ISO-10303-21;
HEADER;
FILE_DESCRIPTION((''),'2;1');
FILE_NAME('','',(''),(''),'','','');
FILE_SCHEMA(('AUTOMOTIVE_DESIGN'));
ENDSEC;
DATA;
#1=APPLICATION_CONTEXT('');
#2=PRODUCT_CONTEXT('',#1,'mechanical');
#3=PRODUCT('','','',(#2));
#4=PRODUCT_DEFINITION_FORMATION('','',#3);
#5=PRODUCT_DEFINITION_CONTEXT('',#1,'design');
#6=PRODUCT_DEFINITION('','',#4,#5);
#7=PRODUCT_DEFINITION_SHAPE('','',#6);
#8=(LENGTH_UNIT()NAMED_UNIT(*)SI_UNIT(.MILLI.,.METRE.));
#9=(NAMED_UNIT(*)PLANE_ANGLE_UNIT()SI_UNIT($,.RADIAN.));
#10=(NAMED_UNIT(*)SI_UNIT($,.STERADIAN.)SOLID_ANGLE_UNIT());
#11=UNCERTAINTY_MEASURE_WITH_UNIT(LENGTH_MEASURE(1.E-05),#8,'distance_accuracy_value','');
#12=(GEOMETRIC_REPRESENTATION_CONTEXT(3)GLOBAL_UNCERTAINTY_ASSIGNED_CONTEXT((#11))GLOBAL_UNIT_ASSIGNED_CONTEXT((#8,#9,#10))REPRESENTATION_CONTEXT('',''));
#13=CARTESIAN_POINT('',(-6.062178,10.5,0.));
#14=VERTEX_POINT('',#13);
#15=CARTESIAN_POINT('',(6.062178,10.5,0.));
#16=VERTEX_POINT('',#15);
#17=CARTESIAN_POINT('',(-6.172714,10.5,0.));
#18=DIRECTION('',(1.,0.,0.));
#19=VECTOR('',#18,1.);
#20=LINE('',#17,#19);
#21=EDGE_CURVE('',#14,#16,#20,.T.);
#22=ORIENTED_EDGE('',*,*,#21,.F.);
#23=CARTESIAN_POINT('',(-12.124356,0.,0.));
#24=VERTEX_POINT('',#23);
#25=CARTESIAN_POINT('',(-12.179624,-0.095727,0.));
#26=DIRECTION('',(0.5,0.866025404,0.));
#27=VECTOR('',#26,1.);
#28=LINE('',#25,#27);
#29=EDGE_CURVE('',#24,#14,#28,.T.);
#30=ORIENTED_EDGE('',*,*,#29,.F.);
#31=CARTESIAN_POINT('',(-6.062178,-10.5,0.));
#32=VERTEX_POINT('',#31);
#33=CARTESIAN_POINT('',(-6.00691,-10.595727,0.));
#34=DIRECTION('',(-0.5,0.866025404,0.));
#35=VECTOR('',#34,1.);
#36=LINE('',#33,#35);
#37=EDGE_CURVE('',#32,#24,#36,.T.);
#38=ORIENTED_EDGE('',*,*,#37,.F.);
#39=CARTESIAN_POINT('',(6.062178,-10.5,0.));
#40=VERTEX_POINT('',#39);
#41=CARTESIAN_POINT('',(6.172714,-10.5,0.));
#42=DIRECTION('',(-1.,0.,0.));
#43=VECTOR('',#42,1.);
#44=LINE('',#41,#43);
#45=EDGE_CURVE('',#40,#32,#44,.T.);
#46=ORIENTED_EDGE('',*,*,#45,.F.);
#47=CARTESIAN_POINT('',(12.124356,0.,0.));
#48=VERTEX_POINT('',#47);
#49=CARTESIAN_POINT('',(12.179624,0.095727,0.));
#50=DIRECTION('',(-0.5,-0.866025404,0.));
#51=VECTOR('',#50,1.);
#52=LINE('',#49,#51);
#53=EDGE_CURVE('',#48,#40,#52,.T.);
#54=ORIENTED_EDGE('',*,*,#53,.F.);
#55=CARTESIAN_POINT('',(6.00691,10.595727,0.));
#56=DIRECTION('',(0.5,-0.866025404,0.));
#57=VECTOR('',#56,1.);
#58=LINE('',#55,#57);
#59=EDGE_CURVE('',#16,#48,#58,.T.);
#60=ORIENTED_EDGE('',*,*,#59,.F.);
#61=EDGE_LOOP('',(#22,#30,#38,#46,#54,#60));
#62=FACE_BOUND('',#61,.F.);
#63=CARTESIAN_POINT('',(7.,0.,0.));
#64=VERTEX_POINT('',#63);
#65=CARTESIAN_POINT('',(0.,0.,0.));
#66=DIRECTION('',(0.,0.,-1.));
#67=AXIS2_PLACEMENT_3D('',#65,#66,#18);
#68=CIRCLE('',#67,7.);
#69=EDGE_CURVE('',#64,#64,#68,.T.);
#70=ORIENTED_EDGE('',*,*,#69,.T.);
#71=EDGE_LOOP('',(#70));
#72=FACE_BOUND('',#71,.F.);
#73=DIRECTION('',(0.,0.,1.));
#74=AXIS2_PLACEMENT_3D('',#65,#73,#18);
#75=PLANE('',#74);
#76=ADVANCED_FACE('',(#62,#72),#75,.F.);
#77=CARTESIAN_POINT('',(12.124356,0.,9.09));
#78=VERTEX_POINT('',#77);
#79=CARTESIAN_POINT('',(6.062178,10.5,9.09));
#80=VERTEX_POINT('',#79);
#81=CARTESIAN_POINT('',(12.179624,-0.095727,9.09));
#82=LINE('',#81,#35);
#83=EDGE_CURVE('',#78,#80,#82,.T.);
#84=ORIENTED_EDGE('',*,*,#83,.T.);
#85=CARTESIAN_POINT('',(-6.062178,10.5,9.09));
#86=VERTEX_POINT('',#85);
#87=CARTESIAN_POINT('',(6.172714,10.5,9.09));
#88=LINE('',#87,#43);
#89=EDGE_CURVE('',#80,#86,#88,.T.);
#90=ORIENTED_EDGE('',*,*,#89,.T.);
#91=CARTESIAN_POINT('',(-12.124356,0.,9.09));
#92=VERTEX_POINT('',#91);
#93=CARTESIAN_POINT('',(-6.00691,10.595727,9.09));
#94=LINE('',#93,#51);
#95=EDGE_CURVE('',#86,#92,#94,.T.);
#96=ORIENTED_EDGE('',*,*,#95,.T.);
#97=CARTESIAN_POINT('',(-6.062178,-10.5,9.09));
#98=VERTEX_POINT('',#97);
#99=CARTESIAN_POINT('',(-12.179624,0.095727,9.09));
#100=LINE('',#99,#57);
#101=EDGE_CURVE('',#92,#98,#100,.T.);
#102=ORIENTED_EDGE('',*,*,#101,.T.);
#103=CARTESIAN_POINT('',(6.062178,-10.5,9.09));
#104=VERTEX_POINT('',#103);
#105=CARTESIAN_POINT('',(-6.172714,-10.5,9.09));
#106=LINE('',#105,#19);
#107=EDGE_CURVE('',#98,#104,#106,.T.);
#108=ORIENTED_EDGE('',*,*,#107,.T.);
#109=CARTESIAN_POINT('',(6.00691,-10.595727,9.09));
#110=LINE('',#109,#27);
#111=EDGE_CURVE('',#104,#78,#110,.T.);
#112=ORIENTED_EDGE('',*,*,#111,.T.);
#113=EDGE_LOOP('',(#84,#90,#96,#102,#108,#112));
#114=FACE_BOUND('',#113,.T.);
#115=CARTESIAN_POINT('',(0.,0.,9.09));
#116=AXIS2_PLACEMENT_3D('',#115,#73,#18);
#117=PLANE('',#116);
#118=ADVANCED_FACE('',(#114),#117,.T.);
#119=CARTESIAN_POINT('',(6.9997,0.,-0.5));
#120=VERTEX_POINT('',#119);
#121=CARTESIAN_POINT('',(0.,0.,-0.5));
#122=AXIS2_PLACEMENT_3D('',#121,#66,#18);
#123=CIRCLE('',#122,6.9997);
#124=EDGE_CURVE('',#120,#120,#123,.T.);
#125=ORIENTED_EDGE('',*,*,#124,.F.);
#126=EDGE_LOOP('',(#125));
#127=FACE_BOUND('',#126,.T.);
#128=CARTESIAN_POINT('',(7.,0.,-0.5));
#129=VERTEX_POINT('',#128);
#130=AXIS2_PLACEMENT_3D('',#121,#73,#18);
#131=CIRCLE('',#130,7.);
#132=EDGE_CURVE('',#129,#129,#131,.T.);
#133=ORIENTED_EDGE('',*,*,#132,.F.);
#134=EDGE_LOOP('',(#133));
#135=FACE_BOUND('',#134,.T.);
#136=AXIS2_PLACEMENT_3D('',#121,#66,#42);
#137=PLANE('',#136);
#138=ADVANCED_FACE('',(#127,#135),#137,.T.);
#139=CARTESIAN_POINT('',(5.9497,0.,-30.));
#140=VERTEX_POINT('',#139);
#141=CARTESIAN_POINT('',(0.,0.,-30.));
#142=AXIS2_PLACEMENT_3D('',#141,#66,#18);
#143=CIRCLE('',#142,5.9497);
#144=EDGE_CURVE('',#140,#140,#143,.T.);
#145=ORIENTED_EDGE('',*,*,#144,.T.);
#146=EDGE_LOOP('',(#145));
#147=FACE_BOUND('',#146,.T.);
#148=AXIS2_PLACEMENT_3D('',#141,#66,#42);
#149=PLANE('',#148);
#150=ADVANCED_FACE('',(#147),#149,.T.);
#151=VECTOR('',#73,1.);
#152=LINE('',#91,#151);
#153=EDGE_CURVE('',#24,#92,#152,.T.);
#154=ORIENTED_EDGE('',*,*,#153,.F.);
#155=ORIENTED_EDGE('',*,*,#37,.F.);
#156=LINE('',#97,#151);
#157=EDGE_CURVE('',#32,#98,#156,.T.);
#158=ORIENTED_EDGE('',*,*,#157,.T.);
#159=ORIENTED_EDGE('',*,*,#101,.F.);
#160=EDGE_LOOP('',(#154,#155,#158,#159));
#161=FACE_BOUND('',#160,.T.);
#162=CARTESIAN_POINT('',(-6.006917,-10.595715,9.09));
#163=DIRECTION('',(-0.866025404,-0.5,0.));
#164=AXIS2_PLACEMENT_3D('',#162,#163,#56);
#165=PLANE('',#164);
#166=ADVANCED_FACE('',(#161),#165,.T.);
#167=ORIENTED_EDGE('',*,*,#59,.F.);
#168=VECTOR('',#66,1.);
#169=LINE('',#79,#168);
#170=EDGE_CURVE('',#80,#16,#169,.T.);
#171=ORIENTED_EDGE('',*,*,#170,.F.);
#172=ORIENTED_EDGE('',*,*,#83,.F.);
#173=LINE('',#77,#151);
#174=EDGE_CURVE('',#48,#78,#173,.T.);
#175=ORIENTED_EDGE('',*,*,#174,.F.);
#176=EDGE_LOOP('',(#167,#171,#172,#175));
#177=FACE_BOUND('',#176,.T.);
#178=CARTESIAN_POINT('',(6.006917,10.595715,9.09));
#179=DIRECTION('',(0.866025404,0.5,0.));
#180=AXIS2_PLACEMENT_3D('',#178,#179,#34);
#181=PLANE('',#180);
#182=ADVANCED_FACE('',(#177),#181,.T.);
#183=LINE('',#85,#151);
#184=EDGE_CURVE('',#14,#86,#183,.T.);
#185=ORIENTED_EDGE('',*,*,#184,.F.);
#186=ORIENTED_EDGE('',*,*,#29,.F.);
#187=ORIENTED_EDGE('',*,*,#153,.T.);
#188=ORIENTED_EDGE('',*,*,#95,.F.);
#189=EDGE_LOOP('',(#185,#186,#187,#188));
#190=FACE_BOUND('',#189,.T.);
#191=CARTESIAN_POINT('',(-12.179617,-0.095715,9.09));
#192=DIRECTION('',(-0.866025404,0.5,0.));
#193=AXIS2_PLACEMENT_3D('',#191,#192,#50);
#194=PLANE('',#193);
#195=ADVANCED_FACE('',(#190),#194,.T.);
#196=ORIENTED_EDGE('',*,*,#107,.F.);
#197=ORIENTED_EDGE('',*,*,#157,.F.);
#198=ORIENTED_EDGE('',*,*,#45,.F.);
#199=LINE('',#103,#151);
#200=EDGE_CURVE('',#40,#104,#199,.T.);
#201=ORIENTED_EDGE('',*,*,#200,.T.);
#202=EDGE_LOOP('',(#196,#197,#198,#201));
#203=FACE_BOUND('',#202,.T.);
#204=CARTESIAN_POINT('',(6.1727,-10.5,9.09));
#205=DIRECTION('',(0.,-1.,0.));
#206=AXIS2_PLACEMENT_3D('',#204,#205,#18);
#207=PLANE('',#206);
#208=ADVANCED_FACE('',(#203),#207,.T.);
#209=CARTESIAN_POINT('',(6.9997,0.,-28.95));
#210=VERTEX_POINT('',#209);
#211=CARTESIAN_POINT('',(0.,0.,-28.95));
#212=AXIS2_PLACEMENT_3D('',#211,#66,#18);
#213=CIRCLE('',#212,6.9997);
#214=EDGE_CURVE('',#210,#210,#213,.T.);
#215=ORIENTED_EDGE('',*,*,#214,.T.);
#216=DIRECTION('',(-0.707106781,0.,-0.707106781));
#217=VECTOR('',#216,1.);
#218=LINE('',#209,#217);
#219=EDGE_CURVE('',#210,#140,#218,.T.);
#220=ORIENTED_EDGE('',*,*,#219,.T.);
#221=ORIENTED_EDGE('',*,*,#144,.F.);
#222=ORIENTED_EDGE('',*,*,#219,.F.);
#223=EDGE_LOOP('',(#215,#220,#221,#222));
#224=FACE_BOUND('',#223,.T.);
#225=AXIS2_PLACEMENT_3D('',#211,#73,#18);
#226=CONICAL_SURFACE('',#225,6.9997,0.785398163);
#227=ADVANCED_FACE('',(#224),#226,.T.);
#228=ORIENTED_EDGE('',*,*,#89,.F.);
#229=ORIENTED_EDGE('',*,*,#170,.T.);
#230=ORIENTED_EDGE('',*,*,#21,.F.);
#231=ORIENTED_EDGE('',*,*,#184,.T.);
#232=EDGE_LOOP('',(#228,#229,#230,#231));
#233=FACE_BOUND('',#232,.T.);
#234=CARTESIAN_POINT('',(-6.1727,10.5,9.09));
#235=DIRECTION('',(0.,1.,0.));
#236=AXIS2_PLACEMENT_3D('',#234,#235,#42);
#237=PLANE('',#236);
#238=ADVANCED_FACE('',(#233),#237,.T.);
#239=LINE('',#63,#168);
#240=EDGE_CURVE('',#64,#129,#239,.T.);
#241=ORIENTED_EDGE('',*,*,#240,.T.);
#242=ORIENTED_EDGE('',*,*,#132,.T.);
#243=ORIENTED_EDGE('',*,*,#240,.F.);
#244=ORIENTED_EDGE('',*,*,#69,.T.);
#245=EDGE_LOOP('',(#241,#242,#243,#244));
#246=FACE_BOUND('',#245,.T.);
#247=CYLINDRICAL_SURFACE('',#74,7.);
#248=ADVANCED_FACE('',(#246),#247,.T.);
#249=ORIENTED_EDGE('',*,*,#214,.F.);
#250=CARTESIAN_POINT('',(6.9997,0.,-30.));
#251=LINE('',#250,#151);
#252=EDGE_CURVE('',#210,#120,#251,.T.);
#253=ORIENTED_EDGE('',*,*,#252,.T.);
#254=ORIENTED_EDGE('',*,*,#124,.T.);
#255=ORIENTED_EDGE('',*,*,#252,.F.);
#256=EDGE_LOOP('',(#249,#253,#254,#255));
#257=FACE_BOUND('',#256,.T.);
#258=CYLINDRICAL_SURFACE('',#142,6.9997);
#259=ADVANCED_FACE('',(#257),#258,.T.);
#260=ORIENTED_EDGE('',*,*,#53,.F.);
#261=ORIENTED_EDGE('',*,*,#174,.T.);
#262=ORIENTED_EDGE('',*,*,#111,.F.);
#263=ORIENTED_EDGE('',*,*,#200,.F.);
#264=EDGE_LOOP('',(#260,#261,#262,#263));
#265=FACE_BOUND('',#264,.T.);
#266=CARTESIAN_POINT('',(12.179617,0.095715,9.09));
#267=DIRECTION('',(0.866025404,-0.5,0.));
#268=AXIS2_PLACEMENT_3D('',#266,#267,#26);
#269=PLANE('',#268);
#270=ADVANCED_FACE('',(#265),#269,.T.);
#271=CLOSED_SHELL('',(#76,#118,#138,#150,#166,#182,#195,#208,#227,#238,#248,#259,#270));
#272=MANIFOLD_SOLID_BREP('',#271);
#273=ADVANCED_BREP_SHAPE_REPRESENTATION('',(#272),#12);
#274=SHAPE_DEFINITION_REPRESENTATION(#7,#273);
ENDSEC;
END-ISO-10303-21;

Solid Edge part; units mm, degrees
sketch "Sketch1" plane through (0, 0, 0) normal (0, 0, 1) x (1, 0, 0)
  circle A0 centre (0, 0) radius 12.18
  dimension "D1" = 24.36
extrude "Protrusion1" add sketch "Sketch1" along normal blind 9.09
sketch "Sketch2" plane through (0, 0, 0) normal (0, 0, -1) x (1, 0, 0)
  circle A0 centre (0, 0) radius 7
extrude "Protrusion2" add sketch "Sketch2" along normal blind 30
sketch "Sketch3" plane through (0, 0, -30) normal (0, 0, -1) x (1, 0, 0)
  circle A0 centre (0, 0) radius 6.9997
extrude "Cutout1" cut sketch "Sketch3" against normal blind 29.5 flip side to cut
chamfer "Chamfer_1" distance 1.05 angle 45 1 edges at (-6.9997, 0, -30)
sketch "Sketch4" plane through (0, 0, 9.09) normal (0, 0, 1) x (1, 0, 0)
  line L0 (-6.1727, 10.5) -> (6.1727, 10.5)
  dimension "D1" = 21
extrude "Cutout2" cut sketch "Sketch4" against normal up to next material side at (0, 10.55, 9.09)
pattern_circular "Pattern1" count 6 over 360 about axis through (0, 0, 9.09) along (0, 0, 1) of "Cutout2"
properties part number "24100597"
